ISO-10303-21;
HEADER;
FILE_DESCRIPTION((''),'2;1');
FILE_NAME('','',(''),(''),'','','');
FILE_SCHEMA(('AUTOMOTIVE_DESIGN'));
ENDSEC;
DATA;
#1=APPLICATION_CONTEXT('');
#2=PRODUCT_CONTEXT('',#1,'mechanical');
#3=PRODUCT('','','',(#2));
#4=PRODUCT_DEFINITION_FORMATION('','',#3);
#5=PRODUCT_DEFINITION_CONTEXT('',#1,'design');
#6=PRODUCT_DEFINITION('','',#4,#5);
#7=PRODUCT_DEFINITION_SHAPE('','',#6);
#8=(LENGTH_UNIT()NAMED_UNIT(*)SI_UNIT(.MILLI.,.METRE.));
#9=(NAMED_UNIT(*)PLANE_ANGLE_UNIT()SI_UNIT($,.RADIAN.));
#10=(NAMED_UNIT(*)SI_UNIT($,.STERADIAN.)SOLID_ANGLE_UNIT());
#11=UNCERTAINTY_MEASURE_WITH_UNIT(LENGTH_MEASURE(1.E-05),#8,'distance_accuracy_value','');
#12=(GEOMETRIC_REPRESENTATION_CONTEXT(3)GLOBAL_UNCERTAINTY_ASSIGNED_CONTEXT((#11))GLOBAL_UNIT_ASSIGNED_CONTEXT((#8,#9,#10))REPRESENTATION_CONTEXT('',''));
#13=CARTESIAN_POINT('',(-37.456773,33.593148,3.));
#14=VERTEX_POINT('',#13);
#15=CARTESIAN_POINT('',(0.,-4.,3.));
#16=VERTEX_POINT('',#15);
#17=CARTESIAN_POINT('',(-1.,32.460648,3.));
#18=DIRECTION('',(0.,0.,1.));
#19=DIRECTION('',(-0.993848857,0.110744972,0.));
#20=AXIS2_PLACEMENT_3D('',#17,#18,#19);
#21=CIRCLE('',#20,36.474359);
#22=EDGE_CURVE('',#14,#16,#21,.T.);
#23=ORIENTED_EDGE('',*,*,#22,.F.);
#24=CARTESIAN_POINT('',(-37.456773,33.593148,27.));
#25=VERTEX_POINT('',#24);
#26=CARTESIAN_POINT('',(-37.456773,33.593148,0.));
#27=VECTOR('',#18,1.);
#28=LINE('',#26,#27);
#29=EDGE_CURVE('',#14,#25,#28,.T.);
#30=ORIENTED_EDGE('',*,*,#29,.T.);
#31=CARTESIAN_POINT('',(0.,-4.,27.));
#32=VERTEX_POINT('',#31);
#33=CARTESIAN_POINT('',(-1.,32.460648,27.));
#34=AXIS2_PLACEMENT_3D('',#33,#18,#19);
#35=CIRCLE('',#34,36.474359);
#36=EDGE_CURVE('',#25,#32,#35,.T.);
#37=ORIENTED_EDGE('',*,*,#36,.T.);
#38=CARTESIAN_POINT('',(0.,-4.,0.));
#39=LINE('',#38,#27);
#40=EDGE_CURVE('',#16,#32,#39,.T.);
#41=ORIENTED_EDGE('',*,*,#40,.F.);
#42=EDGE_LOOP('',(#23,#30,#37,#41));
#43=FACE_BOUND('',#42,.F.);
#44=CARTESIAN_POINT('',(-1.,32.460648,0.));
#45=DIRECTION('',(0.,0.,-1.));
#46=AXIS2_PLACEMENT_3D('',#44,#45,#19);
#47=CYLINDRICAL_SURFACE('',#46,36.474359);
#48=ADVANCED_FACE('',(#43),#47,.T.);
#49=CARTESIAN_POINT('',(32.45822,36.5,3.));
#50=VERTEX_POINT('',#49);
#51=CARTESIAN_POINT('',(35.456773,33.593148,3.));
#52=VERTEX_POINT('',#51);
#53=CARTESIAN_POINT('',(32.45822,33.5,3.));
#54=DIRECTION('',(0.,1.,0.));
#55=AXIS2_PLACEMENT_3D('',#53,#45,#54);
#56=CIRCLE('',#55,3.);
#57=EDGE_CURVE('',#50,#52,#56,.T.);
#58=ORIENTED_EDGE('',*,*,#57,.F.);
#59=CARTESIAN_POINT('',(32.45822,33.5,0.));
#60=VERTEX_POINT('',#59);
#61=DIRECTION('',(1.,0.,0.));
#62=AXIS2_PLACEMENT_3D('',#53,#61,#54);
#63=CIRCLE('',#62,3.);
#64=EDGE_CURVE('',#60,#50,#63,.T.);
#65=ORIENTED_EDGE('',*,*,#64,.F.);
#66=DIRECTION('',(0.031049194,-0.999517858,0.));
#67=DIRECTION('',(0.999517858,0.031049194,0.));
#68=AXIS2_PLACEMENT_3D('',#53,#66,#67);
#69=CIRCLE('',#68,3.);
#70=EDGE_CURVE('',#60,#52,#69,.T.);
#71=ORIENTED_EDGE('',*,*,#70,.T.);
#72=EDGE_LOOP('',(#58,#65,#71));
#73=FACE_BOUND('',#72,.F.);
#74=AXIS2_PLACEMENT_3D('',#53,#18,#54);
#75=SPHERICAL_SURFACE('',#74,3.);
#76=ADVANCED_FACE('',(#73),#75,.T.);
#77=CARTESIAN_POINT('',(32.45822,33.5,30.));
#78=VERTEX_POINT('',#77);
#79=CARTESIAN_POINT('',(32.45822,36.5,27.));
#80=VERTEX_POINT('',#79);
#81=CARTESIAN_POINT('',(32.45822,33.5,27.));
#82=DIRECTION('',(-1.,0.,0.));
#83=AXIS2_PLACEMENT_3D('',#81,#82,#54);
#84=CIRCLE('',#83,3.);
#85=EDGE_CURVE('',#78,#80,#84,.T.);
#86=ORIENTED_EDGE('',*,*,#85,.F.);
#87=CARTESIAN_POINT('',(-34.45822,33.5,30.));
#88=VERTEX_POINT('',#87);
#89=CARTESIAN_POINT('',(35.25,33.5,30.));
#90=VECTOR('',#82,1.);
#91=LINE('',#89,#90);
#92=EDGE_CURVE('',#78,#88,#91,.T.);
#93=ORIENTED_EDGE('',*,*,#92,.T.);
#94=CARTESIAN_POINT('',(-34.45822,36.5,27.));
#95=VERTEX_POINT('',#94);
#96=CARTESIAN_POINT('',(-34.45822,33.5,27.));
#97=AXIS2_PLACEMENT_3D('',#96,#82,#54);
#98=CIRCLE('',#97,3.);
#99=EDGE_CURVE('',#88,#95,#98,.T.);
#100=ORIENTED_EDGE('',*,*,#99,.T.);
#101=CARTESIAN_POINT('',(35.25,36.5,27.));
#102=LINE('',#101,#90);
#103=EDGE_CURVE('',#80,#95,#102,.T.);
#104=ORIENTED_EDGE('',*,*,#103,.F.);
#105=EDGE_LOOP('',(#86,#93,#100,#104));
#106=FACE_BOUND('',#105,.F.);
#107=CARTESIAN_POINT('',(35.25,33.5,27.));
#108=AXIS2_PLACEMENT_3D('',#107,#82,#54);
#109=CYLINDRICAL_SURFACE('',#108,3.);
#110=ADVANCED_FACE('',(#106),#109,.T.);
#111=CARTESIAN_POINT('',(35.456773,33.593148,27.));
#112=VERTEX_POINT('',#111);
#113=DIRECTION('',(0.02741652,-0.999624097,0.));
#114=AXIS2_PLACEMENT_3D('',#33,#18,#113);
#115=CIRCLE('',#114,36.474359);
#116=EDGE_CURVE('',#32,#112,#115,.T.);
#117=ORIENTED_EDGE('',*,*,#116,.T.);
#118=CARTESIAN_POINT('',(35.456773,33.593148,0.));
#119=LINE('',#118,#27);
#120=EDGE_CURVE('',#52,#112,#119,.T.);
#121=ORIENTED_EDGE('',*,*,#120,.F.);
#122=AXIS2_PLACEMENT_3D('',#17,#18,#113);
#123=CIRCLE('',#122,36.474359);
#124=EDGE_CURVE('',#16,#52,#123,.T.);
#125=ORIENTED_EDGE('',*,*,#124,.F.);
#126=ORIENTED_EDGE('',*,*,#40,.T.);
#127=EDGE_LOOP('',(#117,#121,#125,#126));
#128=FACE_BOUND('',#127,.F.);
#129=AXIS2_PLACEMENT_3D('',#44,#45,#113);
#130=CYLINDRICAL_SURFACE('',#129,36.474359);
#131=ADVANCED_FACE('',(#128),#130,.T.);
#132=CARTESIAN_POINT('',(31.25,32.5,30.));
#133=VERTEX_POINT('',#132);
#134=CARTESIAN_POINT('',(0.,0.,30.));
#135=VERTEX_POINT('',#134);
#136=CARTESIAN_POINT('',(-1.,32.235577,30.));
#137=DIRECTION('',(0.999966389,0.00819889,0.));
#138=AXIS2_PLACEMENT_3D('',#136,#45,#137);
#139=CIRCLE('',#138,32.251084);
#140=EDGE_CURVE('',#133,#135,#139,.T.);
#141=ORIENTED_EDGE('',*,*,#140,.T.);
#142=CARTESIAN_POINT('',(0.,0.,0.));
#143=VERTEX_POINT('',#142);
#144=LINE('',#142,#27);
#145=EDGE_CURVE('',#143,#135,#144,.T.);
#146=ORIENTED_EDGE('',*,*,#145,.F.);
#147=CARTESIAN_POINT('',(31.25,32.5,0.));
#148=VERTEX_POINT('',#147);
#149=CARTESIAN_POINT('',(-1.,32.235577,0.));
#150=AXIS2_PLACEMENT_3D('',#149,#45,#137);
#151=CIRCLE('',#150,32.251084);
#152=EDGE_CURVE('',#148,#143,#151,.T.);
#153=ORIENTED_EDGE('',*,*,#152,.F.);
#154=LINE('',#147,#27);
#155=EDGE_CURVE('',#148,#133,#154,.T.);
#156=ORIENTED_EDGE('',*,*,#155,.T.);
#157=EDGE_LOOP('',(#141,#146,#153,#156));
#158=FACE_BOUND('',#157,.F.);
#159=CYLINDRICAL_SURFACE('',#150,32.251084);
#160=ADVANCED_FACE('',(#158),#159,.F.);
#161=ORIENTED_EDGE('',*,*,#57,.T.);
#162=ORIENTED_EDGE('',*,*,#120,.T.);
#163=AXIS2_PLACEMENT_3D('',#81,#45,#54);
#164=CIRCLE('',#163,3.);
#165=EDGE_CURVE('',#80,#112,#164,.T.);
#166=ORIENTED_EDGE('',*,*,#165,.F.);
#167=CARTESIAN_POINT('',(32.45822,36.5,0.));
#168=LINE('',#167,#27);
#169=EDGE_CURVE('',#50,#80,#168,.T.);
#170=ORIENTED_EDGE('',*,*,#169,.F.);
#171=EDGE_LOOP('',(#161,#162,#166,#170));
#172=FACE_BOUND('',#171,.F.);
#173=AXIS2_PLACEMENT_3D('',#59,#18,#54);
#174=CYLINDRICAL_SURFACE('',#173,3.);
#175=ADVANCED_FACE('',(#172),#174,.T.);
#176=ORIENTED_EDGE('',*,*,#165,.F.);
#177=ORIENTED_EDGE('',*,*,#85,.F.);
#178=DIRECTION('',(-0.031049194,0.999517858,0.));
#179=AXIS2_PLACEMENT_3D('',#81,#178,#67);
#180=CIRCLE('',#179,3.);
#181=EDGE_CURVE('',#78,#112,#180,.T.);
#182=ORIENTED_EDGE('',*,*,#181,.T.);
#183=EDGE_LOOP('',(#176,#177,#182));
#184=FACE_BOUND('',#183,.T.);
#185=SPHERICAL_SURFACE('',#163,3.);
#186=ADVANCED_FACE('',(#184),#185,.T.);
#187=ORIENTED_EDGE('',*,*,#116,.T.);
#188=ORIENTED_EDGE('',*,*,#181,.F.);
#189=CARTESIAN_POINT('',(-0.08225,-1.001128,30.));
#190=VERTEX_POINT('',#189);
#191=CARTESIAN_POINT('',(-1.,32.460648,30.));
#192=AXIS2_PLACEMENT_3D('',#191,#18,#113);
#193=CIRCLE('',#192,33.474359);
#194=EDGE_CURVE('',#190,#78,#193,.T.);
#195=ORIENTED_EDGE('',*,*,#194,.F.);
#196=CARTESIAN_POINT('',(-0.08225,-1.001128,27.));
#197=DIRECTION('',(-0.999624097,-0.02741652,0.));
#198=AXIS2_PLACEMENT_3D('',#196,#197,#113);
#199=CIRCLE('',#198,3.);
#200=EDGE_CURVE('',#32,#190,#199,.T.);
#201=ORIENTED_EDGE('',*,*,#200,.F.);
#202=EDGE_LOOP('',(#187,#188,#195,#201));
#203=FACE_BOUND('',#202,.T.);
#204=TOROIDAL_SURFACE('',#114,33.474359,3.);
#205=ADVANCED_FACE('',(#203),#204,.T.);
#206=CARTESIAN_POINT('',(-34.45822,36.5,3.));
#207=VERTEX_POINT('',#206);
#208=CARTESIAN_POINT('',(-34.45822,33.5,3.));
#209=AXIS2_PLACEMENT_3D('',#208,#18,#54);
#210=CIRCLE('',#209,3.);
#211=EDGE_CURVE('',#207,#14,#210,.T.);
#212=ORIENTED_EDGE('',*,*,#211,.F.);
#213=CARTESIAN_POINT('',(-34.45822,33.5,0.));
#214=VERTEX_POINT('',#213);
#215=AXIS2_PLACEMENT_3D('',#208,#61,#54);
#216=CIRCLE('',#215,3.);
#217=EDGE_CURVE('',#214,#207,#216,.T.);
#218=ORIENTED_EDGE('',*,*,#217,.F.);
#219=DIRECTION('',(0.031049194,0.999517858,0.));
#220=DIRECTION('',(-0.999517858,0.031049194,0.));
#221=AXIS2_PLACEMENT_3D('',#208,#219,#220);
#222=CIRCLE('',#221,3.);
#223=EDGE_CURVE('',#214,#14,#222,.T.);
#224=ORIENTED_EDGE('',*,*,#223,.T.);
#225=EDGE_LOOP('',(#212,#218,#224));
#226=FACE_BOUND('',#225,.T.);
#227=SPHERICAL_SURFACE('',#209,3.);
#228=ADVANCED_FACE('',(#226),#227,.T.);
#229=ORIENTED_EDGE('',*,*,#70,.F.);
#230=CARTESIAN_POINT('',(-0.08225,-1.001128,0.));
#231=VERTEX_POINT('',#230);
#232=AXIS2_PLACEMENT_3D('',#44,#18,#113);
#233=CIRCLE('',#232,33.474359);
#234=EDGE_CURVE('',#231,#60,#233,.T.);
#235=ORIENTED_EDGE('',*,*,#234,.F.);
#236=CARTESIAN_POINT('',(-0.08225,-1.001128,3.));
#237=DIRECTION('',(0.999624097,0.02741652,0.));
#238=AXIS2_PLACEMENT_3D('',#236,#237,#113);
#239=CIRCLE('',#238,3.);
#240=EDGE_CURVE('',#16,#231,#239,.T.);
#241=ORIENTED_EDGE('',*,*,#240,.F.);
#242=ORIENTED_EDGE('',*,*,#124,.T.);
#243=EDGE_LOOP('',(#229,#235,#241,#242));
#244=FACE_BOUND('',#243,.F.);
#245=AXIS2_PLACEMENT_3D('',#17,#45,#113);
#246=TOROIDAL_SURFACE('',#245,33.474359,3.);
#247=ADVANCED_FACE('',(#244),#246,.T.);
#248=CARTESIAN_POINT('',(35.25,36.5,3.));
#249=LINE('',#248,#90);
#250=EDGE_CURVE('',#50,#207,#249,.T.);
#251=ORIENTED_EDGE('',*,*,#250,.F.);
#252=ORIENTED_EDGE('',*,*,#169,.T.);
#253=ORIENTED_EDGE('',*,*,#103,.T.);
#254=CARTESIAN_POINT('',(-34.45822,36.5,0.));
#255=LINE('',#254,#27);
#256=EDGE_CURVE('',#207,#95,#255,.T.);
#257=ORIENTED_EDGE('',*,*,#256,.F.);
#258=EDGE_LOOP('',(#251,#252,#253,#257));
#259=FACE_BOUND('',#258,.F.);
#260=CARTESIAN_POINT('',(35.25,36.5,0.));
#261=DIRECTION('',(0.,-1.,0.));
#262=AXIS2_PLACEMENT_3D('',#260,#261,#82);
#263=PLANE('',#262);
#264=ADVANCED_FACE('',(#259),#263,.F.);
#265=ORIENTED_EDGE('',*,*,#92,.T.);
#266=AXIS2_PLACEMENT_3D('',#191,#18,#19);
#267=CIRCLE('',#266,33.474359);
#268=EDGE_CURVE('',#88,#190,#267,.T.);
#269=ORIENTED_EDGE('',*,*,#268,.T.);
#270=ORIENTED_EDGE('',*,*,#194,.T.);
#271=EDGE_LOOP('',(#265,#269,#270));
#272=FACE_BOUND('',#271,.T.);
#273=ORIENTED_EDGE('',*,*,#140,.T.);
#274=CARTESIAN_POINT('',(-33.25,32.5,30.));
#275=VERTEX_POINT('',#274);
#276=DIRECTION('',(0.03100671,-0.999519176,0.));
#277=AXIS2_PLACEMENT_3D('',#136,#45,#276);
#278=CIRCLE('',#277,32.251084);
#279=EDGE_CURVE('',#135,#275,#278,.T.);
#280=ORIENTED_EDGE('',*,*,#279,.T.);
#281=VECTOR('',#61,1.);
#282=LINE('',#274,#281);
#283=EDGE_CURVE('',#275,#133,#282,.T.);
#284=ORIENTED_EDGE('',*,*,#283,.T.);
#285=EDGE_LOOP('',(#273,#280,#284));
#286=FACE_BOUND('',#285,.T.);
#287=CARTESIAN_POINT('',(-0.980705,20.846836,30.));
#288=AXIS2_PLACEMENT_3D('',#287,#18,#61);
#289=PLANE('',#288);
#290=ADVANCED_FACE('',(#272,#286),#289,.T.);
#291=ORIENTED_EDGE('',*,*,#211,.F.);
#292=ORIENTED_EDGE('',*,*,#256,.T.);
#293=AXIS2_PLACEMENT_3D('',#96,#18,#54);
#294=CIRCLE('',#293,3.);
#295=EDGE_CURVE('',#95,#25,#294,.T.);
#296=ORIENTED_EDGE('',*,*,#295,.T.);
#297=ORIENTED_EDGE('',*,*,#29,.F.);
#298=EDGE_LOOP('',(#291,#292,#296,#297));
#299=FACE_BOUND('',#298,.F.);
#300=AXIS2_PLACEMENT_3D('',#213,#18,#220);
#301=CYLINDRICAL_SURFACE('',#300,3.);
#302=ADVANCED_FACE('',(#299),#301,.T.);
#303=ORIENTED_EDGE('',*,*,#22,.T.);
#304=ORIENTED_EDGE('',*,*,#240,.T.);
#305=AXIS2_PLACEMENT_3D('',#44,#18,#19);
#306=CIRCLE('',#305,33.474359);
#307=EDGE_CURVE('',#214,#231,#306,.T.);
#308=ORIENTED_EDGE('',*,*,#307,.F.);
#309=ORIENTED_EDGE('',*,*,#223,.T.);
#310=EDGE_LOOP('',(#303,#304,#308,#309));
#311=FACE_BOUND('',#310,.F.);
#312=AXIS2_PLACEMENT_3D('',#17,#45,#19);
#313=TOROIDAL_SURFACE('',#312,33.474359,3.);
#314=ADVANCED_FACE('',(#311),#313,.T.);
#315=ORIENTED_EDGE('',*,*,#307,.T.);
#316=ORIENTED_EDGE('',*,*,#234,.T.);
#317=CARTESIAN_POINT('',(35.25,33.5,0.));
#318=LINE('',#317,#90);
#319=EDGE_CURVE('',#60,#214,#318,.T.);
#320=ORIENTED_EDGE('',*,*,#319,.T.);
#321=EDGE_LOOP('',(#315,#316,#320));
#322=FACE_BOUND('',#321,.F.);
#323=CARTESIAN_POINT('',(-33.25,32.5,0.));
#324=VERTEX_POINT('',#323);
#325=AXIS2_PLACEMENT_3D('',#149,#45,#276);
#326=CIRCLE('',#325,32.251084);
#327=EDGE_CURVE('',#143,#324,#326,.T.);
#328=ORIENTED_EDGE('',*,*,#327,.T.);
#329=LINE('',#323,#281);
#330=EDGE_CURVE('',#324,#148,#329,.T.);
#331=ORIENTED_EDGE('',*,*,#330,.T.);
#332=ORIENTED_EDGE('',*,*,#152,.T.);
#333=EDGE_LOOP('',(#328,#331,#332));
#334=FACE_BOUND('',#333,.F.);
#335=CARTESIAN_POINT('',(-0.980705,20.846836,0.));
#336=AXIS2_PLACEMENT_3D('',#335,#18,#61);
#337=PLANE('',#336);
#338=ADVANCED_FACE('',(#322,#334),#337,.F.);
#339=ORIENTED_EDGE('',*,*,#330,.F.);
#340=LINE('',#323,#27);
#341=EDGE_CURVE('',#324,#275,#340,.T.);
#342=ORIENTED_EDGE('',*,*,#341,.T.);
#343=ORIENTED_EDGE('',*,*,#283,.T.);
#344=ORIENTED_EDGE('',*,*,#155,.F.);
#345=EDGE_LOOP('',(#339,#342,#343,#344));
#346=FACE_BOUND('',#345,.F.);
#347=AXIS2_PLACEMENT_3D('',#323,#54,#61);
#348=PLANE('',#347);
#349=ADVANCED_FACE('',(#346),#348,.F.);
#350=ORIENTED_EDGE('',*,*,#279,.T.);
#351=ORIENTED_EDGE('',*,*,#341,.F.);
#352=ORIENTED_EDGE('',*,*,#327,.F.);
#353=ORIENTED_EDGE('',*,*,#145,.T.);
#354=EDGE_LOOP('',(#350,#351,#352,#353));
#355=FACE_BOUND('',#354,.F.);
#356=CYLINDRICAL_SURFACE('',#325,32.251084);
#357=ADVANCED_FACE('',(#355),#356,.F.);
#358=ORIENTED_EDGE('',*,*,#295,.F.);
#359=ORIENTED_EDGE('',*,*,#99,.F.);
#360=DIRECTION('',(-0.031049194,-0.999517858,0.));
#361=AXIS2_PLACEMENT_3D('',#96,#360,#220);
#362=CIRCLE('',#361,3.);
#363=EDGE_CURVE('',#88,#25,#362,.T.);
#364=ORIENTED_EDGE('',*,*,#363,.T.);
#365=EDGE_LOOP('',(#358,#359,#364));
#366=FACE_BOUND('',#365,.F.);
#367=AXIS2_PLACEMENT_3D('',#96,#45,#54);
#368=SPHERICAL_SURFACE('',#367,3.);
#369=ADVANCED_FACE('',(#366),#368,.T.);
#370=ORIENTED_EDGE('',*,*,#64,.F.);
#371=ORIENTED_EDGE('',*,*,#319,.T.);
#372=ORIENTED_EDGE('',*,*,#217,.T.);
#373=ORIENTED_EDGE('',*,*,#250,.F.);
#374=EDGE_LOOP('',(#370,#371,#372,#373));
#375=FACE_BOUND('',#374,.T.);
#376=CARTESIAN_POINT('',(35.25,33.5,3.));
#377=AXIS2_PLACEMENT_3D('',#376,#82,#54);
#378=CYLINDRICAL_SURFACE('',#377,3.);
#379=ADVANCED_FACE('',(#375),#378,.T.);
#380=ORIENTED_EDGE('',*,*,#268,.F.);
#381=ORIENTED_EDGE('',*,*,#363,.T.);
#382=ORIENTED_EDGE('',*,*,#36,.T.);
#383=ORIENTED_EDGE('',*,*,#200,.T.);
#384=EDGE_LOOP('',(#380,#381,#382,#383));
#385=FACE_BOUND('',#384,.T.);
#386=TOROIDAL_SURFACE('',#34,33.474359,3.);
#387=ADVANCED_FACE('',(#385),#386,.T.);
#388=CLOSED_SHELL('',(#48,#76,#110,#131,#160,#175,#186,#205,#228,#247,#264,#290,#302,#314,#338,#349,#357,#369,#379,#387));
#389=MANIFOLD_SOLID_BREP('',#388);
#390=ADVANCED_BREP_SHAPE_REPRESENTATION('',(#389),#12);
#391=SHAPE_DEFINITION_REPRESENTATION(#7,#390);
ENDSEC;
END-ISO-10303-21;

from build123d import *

# Parameters (mm, degrees)
F1_DEPTH = 30
F3_R     = 3


# Not quite as in the source:
# - a feature of the source that left no trace in its solid (it failed there, or was rolled back) is left out


with BuildPart() as f1:
    # F0 (on Top) → F1 (new body)
    with BuildSketch(Plane.XY):
        with BuildLine():
            ThreePointArc((-37.25, 36.5), (-27.8459144936, 7.7690354349), (0, -4))
            ThreePointArc((0, -4), (26.5127811208, 8.5143386541), (35.25, 36.5))
            Line((35.25, 36.5), (-37.25, 36.5))
        make_face()
        with BuildLine():
            ThreePointArc((0, 0), (-23.5433609961, 9.1719845194), (-33.25, 32.5))
            Line((-33.25, 32.5), (31.25, 32.5))
            ThreePointArc((31.25, 32.5), (22.2476477305, 9.8820694899), (0, 0))
        make_face(mode=Mode.SUBTRACT)
    extrude(amount=F1_DEPTH)

    # F3
    f3_edges = [f1.edges().sort_by_distance(p)[0] for p in [
        (-1, 36.5, 0),
        (-1, -4.013711, 0),
        (-37.25, 36.5, 15),
        (35.25, 36.5, 15),
        (-1, 36.5, 30),
        (-1, -4.013711, 30),
    ]]
    fillet(f3_edges, radius=F3_R)


solid = f1.part
